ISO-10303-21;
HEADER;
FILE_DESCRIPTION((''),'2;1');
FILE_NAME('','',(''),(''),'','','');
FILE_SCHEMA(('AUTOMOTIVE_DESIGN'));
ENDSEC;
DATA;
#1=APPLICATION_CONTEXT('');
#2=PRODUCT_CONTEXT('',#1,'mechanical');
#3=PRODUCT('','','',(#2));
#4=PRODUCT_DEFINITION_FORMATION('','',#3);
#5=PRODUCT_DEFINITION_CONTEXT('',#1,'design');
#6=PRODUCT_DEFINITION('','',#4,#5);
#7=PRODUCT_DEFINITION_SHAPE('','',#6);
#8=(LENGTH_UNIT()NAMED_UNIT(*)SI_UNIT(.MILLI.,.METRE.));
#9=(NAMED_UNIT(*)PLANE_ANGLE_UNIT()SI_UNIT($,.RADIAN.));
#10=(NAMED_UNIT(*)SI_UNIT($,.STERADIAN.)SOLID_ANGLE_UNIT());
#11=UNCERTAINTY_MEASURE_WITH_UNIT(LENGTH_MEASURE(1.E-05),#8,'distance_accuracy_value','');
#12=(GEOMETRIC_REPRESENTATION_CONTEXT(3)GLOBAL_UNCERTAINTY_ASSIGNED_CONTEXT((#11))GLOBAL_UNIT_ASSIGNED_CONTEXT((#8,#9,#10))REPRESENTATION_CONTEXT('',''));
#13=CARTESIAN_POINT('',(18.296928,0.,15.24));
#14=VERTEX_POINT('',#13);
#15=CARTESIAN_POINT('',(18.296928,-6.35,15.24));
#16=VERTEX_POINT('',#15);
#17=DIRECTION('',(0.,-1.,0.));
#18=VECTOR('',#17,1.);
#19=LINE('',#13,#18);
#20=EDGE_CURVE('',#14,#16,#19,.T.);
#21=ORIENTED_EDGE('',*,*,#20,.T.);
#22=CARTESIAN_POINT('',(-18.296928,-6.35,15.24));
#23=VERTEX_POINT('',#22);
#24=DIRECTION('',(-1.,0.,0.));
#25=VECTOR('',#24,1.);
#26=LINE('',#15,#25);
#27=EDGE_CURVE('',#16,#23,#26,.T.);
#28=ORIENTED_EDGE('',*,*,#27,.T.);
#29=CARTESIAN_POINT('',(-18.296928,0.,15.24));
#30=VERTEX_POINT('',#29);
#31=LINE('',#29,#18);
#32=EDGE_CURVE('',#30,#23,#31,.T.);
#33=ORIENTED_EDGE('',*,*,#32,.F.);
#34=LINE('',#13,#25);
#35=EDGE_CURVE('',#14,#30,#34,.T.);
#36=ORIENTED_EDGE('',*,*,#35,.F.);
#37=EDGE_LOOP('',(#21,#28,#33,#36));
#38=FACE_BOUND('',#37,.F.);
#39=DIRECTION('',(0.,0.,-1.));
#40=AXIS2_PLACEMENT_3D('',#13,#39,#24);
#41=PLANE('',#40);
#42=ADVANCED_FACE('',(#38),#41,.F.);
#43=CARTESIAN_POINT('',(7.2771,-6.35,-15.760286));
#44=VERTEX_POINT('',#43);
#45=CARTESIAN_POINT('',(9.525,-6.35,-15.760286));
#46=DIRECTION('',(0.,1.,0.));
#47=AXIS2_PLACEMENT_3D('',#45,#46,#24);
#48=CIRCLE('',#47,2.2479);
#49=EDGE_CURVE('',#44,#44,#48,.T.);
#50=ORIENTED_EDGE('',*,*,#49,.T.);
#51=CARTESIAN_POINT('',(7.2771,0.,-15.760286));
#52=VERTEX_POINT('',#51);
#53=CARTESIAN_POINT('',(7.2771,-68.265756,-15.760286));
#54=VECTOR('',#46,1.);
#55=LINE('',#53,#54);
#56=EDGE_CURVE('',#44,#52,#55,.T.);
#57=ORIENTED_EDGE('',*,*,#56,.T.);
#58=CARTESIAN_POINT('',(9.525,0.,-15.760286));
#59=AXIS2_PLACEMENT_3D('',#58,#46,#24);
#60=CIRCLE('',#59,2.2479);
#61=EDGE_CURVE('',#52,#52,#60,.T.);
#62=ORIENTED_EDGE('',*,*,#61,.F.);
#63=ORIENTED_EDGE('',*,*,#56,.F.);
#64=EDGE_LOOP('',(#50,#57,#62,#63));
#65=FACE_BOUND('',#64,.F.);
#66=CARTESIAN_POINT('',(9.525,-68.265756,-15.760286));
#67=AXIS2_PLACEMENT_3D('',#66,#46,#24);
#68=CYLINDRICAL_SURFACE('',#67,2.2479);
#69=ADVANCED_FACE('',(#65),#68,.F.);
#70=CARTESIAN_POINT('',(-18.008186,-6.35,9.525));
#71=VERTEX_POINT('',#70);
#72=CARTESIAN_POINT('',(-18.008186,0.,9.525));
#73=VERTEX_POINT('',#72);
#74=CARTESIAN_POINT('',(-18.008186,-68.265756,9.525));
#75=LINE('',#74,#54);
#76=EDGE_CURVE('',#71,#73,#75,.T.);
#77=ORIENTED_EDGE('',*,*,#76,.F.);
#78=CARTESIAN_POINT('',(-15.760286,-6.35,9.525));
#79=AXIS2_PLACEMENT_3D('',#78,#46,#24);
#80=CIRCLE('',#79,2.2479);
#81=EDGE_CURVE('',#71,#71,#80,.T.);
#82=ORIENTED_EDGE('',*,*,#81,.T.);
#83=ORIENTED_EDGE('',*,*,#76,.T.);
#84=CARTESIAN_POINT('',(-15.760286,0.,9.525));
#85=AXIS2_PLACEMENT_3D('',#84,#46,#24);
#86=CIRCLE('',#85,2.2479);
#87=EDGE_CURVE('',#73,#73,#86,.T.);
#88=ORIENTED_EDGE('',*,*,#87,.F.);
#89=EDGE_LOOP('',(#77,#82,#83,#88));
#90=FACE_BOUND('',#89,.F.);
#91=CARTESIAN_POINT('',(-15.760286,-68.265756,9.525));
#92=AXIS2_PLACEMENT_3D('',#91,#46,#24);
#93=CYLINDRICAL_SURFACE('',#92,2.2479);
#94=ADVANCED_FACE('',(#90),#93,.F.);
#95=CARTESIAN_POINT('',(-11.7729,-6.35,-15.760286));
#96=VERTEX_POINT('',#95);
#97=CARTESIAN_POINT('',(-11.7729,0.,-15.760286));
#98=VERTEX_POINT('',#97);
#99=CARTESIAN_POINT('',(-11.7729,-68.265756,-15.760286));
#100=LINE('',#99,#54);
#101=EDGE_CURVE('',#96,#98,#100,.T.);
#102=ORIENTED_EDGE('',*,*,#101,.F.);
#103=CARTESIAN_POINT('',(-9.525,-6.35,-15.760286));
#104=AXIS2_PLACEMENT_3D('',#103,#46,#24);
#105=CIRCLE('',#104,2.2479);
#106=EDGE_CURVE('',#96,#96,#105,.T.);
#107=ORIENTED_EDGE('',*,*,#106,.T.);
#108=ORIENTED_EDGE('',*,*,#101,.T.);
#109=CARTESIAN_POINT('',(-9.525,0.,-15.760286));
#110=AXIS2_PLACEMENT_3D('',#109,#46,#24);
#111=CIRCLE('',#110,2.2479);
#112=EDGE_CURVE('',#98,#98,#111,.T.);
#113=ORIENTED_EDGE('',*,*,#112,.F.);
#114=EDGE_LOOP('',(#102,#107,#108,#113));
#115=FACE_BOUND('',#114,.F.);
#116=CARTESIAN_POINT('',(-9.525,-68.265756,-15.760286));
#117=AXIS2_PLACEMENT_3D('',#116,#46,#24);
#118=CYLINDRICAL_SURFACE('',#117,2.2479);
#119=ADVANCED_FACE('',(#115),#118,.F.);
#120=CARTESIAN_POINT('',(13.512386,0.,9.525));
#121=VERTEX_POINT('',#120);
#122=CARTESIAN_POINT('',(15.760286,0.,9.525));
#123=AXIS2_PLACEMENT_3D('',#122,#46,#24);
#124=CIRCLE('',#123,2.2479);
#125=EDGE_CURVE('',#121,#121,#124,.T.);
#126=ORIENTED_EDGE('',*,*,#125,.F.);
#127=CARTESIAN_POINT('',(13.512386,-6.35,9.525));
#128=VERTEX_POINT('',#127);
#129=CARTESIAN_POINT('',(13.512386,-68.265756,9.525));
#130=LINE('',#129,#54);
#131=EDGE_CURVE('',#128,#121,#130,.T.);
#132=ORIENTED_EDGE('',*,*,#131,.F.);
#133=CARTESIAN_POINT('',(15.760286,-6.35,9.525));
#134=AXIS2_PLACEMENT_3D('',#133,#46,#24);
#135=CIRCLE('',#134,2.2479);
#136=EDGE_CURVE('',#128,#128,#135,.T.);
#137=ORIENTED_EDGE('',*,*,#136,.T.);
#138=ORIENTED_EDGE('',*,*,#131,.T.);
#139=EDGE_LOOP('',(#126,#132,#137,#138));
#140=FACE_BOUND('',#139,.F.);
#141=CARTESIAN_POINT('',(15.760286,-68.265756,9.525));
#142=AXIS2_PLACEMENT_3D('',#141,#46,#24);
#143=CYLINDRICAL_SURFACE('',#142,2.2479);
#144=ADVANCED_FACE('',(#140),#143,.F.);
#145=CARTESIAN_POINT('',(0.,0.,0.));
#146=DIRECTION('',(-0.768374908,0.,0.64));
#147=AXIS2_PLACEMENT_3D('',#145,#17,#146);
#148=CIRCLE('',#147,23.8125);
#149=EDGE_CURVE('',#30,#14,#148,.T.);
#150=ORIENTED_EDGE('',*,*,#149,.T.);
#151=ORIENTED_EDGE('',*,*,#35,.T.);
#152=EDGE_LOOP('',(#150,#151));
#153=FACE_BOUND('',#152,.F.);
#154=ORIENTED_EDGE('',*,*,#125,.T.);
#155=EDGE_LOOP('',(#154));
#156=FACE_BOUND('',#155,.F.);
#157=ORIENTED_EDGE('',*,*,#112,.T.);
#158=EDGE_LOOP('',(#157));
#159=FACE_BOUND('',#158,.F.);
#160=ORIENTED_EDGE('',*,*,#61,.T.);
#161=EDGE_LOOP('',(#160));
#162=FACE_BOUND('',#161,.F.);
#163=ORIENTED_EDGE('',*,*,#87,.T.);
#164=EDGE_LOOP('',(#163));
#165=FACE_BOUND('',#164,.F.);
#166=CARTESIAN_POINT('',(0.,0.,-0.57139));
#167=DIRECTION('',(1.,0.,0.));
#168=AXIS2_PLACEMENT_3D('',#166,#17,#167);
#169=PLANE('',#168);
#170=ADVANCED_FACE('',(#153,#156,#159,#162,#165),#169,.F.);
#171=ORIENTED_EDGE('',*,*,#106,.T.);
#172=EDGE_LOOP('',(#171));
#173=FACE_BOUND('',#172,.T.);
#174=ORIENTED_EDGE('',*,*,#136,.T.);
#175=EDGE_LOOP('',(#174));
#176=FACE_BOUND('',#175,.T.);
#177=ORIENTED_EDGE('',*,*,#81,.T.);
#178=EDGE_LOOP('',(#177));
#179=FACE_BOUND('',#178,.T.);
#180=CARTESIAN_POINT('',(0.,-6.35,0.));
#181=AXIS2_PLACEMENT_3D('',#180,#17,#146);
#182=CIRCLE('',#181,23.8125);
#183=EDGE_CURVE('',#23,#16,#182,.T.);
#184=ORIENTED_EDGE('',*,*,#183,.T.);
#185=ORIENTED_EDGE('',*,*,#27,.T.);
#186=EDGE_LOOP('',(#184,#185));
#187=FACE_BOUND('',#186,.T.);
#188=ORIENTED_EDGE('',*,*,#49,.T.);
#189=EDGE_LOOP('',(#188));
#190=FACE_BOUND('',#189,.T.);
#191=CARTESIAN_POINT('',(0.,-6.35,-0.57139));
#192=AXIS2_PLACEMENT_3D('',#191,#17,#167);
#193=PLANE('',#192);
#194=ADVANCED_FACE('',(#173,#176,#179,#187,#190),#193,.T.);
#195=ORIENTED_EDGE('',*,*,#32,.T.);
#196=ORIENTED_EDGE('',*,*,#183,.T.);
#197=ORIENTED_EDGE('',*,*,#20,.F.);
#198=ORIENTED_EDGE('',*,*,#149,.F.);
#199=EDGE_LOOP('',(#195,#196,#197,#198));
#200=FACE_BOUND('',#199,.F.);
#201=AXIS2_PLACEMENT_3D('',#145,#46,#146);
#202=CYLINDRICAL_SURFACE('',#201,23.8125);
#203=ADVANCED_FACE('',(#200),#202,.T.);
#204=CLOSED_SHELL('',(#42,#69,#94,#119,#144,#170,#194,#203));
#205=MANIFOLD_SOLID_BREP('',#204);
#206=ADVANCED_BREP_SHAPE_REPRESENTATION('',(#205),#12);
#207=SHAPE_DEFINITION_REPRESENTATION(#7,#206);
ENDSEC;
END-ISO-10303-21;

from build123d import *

# Parameters (mm, degrees)
F1_DEPTH = 6.35
F3_D     = 4.4958


with BuildPart() as f1:
    # F0 (on Front) → F1 (new body)
    with BuildSketch(Plane.XZ):
        with BuildLine():
            Line((18.2969275085, 15.24), (-18.2969275085, 15.24))
            ThreePointArc((-18.2969275085, 15.24), (0, -23.8125), (18.2969275085, 15.24))
        make_face()
    extrude(amount=F1_DEPTH)

    # F3 (through all)
    with Locations(Plane.XZ.offset(6.35)):
        with Locations((-15.7602855304, 9.525), (15.7602855304, 9.525), (-9.525, -15.7602855304), (9.525, -15.7602855304)):
            Hole(F3_D / 2)


solid = f1.part
